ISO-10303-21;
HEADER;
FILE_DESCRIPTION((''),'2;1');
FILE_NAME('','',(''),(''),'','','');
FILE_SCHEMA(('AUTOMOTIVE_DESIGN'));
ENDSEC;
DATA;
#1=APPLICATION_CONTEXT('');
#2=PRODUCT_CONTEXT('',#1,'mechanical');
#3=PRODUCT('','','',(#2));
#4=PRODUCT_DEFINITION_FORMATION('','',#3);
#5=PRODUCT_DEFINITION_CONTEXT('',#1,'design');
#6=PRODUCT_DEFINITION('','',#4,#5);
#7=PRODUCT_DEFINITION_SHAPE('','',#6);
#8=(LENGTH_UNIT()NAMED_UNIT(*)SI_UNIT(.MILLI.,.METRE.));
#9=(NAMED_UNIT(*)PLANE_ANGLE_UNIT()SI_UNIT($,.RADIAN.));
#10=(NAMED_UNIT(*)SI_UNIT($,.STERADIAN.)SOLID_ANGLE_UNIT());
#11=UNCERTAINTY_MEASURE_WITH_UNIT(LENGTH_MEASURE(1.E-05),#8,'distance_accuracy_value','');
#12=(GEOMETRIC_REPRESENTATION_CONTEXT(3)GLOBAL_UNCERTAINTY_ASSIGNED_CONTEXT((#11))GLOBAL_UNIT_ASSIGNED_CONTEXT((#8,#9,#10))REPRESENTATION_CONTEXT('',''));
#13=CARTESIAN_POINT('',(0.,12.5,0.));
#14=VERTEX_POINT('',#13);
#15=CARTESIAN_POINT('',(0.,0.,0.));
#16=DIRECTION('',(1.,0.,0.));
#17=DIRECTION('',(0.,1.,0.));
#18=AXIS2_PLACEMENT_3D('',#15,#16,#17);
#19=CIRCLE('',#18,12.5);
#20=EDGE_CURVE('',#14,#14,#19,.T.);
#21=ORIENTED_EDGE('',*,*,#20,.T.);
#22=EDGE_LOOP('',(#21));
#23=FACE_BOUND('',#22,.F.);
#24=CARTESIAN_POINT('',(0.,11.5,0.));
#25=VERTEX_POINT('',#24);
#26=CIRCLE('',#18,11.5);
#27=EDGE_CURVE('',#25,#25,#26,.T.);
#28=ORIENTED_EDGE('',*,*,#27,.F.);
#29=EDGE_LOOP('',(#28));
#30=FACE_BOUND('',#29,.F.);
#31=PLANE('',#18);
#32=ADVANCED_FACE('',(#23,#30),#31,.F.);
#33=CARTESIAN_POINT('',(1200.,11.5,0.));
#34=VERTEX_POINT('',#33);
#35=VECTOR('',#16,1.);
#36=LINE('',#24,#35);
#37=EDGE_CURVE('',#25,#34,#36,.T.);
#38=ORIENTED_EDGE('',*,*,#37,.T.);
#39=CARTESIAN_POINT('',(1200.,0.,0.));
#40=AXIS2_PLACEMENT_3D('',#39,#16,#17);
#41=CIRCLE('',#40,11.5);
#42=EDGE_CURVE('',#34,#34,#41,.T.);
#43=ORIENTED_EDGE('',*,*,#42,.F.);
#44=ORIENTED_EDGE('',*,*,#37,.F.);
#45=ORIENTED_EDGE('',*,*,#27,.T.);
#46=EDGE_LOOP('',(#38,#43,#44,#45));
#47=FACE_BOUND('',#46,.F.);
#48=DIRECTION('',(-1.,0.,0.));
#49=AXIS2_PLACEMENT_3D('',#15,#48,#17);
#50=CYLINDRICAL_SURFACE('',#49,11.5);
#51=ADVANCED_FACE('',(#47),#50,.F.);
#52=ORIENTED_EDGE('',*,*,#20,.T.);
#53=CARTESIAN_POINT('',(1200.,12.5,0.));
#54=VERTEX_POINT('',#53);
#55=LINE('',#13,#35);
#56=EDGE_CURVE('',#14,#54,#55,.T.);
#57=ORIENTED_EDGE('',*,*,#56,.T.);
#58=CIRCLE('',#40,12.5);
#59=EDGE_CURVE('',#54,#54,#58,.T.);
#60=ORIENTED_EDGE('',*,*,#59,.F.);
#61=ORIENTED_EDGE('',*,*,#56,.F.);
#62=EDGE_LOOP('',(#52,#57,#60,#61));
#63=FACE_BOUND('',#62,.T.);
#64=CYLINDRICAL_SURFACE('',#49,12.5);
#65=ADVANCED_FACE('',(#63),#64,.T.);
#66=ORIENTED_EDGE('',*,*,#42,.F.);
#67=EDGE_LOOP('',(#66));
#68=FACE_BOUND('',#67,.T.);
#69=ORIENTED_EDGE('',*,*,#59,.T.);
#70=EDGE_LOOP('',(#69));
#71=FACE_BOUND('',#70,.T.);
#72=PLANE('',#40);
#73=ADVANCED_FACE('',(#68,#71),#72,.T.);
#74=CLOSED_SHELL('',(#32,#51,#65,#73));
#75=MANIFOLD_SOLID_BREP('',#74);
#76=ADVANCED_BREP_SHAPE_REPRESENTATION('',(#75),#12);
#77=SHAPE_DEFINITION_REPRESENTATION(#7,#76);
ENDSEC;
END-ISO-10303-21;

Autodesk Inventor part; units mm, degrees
ref_plane "YZ Plane" through (0, 0, 0) normal (1, 0, 0) x (0, 1, 0)
ref_plane "XZ Plane" through (0, 0, 0) normal (0, 1, 0) x (-1, 0, 0)
ref_plane "XY Plane" through (0, 0, 0) normal (0, 0, 1) x (1, 0, 0)
sketch "Sketch1" plane through (0, 0, 0) normal (1, 0, 0) x (0, 1, 0)
  circle A0 centre (0, 0) radius 12.5
  circle A1 centre (0, 0) radius 11.5
  dimension "d0" = 25
  dimension "d1" = 1
extrude "Extrusion1" add sketch "Sketch1" along normal blind 1200
properties part number "Y_Pipe"
